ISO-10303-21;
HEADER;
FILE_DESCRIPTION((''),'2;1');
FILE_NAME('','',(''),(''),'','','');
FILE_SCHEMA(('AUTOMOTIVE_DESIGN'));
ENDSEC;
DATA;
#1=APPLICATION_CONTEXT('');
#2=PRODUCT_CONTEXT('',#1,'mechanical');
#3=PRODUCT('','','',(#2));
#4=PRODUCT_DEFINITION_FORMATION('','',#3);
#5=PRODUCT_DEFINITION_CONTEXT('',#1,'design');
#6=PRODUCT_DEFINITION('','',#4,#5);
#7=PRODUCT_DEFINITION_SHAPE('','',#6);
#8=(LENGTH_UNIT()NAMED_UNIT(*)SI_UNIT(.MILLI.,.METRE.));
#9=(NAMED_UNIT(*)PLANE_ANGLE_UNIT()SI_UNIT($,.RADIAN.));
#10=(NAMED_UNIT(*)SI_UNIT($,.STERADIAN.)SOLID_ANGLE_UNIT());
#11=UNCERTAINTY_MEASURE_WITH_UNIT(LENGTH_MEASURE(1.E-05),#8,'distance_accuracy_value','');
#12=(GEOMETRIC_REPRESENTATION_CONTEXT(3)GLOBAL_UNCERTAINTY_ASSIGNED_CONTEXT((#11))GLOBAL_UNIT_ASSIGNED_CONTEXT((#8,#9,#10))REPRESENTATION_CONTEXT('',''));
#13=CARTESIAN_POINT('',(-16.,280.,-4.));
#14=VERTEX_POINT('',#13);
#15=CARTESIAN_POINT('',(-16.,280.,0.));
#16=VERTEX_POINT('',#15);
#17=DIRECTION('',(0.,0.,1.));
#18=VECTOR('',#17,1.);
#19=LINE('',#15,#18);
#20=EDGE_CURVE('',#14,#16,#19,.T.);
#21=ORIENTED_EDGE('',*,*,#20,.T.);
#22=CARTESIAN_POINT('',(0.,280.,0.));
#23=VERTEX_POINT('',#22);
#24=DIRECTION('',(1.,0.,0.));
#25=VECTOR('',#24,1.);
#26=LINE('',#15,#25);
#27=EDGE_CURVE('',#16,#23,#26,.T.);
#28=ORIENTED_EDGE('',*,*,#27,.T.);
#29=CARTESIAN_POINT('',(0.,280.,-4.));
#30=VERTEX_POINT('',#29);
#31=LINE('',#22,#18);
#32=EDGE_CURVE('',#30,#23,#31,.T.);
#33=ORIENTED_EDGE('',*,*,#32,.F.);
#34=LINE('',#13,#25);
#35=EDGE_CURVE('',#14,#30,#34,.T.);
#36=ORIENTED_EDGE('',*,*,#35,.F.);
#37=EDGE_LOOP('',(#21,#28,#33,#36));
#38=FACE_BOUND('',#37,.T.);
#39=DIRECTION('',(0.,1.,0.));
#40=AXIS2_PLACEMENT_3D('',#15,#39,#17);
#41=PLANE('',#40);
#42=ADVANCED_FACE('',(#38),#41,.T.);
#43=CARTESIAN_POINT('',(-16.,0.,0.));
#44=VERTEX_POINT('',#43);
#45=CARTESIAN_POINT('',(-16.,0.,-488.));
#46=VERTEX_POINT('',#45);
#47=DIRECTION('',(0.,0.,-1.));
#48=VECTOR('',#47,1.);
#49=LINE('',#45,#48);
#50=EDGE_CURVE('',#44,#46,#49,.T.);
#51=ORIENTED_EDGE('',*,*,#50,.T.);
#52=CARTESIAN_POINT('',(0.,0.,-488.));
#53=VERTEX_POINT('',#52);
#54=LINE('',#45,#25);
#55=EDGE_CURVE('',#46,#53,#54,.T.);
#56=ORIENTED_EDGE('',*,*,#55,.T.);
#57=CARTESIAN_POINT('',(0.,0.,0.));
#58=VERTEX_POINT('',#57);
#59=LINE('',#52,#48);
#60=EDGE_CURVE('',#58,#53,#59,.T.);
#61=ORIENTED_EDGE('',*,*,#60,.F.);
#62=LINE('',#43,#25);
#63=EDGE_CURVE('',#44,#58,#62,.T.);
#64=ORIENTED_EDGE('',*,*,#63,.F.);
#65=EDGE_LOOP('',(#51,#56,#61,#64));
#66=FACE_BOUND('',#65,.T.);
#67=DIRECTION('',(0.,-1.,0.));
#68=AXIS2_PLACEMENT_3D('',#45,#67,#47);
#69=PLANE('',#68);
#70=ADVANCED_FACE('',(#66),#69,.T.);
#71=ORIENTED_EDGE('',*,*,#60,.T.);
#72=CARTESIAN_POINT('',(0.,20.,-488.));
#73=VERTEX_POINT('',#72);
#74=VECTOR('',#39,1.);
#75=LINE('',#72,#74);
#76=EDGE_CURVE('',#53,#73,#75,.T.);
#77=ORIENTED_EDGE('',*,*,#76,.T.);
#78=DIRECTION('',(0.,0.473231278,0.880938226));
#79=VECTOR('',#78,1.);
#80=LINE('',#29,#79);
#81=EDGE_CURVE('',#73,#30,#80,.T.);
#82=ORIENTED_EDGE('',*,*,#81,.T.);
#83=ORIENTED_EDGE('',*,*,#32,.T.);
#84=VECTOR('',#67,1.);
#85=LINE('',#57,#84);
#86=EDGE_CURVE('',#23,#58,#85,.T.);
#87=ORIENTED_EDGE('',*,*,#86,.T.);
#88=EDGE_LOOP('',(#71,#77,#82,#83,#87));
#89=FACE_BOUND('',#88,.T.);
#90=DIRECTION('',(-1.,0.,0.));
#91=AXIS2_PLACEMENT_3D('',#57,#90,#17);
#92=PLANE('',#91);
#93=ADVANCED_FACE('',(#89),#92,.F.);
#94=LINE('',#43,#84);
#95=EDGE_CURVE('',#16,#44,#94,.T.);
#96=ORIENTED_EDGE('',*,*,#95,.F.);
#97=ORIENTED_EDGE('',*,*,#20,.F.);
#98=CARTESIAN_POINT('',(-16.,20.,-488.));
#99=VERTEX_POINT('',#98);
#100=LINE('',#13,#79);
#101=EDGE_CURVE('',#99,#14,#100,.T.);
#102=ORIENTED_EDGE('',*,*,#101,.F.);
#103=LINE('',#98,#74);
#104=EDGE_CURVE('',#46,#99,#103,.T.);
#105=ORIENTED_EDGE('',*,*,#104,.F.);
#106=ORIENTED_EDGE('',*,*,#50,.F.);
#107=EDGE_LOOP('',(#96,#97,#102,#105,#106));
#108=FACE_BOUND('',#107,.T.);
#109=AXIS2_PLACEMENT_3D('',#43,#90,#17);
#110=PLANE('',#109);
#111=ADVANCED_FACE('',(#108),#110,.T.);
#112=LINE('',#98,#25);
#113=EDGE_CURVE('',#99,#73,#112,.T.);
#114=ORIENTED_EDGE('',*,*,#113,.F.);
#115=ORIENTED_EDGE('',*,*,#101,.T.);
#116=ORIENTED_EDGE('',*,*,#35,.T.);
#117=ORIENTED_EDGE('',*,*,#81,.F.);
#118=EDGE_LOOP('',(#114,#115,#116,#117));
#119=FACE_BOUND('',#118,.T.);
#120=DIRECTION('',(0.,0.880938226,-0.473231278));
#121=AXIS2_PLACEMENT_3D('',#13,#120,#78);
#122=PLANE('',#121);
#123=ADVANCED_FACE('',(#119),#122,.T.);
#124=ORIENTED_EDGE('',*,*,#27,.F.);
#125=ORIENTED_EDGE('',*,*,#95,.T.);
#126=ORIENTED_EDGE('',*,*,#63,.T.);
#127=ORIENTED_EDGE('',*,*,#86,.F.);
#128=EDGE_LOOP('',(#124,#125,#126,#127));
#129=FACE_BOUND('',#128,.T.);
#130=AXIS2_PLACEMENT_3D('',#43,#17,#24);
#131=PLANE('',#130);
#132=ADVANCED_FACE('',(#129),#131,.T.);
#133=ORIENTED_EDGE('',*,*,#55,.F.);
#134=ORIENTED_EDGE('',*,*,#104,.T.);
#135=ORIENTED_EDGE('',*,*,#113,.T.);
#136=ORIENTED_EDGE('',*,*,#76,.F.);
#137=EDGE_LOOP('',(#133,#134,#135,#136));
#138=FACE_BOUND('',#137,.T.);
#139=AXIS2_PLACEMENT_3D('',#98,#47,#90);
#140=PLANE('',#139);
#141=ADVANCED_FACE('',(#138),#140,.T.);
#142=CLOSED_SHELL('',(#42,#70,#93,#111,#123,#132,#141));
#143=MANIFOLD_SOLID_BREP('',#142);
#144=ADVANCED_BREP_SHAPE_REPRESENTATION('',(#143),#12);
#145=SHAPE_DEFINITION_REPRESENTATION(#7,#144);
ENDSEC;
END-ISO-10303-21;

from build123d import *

# Parameters (mm, degrees)
SM_BASE_FLANGE_1_DEPTH = 16


# Sheet-metal steps are written as plain solids
with BuildPart() as part:
    # Sketch 1 → 基体-法兰1 (new body)
    with BuildSketch(Plane(origin=(0, 0, 0), x_dir=(0, 0, -1), z_dir=(1, 0, 0))):
        Polygon((0, 0), (0, 280), (4, 280), (488, 20), (488, 0), align=None)
    extrude(amount=-SM_BASE_FLANGE_1_DEPTH)


solid = part.part
